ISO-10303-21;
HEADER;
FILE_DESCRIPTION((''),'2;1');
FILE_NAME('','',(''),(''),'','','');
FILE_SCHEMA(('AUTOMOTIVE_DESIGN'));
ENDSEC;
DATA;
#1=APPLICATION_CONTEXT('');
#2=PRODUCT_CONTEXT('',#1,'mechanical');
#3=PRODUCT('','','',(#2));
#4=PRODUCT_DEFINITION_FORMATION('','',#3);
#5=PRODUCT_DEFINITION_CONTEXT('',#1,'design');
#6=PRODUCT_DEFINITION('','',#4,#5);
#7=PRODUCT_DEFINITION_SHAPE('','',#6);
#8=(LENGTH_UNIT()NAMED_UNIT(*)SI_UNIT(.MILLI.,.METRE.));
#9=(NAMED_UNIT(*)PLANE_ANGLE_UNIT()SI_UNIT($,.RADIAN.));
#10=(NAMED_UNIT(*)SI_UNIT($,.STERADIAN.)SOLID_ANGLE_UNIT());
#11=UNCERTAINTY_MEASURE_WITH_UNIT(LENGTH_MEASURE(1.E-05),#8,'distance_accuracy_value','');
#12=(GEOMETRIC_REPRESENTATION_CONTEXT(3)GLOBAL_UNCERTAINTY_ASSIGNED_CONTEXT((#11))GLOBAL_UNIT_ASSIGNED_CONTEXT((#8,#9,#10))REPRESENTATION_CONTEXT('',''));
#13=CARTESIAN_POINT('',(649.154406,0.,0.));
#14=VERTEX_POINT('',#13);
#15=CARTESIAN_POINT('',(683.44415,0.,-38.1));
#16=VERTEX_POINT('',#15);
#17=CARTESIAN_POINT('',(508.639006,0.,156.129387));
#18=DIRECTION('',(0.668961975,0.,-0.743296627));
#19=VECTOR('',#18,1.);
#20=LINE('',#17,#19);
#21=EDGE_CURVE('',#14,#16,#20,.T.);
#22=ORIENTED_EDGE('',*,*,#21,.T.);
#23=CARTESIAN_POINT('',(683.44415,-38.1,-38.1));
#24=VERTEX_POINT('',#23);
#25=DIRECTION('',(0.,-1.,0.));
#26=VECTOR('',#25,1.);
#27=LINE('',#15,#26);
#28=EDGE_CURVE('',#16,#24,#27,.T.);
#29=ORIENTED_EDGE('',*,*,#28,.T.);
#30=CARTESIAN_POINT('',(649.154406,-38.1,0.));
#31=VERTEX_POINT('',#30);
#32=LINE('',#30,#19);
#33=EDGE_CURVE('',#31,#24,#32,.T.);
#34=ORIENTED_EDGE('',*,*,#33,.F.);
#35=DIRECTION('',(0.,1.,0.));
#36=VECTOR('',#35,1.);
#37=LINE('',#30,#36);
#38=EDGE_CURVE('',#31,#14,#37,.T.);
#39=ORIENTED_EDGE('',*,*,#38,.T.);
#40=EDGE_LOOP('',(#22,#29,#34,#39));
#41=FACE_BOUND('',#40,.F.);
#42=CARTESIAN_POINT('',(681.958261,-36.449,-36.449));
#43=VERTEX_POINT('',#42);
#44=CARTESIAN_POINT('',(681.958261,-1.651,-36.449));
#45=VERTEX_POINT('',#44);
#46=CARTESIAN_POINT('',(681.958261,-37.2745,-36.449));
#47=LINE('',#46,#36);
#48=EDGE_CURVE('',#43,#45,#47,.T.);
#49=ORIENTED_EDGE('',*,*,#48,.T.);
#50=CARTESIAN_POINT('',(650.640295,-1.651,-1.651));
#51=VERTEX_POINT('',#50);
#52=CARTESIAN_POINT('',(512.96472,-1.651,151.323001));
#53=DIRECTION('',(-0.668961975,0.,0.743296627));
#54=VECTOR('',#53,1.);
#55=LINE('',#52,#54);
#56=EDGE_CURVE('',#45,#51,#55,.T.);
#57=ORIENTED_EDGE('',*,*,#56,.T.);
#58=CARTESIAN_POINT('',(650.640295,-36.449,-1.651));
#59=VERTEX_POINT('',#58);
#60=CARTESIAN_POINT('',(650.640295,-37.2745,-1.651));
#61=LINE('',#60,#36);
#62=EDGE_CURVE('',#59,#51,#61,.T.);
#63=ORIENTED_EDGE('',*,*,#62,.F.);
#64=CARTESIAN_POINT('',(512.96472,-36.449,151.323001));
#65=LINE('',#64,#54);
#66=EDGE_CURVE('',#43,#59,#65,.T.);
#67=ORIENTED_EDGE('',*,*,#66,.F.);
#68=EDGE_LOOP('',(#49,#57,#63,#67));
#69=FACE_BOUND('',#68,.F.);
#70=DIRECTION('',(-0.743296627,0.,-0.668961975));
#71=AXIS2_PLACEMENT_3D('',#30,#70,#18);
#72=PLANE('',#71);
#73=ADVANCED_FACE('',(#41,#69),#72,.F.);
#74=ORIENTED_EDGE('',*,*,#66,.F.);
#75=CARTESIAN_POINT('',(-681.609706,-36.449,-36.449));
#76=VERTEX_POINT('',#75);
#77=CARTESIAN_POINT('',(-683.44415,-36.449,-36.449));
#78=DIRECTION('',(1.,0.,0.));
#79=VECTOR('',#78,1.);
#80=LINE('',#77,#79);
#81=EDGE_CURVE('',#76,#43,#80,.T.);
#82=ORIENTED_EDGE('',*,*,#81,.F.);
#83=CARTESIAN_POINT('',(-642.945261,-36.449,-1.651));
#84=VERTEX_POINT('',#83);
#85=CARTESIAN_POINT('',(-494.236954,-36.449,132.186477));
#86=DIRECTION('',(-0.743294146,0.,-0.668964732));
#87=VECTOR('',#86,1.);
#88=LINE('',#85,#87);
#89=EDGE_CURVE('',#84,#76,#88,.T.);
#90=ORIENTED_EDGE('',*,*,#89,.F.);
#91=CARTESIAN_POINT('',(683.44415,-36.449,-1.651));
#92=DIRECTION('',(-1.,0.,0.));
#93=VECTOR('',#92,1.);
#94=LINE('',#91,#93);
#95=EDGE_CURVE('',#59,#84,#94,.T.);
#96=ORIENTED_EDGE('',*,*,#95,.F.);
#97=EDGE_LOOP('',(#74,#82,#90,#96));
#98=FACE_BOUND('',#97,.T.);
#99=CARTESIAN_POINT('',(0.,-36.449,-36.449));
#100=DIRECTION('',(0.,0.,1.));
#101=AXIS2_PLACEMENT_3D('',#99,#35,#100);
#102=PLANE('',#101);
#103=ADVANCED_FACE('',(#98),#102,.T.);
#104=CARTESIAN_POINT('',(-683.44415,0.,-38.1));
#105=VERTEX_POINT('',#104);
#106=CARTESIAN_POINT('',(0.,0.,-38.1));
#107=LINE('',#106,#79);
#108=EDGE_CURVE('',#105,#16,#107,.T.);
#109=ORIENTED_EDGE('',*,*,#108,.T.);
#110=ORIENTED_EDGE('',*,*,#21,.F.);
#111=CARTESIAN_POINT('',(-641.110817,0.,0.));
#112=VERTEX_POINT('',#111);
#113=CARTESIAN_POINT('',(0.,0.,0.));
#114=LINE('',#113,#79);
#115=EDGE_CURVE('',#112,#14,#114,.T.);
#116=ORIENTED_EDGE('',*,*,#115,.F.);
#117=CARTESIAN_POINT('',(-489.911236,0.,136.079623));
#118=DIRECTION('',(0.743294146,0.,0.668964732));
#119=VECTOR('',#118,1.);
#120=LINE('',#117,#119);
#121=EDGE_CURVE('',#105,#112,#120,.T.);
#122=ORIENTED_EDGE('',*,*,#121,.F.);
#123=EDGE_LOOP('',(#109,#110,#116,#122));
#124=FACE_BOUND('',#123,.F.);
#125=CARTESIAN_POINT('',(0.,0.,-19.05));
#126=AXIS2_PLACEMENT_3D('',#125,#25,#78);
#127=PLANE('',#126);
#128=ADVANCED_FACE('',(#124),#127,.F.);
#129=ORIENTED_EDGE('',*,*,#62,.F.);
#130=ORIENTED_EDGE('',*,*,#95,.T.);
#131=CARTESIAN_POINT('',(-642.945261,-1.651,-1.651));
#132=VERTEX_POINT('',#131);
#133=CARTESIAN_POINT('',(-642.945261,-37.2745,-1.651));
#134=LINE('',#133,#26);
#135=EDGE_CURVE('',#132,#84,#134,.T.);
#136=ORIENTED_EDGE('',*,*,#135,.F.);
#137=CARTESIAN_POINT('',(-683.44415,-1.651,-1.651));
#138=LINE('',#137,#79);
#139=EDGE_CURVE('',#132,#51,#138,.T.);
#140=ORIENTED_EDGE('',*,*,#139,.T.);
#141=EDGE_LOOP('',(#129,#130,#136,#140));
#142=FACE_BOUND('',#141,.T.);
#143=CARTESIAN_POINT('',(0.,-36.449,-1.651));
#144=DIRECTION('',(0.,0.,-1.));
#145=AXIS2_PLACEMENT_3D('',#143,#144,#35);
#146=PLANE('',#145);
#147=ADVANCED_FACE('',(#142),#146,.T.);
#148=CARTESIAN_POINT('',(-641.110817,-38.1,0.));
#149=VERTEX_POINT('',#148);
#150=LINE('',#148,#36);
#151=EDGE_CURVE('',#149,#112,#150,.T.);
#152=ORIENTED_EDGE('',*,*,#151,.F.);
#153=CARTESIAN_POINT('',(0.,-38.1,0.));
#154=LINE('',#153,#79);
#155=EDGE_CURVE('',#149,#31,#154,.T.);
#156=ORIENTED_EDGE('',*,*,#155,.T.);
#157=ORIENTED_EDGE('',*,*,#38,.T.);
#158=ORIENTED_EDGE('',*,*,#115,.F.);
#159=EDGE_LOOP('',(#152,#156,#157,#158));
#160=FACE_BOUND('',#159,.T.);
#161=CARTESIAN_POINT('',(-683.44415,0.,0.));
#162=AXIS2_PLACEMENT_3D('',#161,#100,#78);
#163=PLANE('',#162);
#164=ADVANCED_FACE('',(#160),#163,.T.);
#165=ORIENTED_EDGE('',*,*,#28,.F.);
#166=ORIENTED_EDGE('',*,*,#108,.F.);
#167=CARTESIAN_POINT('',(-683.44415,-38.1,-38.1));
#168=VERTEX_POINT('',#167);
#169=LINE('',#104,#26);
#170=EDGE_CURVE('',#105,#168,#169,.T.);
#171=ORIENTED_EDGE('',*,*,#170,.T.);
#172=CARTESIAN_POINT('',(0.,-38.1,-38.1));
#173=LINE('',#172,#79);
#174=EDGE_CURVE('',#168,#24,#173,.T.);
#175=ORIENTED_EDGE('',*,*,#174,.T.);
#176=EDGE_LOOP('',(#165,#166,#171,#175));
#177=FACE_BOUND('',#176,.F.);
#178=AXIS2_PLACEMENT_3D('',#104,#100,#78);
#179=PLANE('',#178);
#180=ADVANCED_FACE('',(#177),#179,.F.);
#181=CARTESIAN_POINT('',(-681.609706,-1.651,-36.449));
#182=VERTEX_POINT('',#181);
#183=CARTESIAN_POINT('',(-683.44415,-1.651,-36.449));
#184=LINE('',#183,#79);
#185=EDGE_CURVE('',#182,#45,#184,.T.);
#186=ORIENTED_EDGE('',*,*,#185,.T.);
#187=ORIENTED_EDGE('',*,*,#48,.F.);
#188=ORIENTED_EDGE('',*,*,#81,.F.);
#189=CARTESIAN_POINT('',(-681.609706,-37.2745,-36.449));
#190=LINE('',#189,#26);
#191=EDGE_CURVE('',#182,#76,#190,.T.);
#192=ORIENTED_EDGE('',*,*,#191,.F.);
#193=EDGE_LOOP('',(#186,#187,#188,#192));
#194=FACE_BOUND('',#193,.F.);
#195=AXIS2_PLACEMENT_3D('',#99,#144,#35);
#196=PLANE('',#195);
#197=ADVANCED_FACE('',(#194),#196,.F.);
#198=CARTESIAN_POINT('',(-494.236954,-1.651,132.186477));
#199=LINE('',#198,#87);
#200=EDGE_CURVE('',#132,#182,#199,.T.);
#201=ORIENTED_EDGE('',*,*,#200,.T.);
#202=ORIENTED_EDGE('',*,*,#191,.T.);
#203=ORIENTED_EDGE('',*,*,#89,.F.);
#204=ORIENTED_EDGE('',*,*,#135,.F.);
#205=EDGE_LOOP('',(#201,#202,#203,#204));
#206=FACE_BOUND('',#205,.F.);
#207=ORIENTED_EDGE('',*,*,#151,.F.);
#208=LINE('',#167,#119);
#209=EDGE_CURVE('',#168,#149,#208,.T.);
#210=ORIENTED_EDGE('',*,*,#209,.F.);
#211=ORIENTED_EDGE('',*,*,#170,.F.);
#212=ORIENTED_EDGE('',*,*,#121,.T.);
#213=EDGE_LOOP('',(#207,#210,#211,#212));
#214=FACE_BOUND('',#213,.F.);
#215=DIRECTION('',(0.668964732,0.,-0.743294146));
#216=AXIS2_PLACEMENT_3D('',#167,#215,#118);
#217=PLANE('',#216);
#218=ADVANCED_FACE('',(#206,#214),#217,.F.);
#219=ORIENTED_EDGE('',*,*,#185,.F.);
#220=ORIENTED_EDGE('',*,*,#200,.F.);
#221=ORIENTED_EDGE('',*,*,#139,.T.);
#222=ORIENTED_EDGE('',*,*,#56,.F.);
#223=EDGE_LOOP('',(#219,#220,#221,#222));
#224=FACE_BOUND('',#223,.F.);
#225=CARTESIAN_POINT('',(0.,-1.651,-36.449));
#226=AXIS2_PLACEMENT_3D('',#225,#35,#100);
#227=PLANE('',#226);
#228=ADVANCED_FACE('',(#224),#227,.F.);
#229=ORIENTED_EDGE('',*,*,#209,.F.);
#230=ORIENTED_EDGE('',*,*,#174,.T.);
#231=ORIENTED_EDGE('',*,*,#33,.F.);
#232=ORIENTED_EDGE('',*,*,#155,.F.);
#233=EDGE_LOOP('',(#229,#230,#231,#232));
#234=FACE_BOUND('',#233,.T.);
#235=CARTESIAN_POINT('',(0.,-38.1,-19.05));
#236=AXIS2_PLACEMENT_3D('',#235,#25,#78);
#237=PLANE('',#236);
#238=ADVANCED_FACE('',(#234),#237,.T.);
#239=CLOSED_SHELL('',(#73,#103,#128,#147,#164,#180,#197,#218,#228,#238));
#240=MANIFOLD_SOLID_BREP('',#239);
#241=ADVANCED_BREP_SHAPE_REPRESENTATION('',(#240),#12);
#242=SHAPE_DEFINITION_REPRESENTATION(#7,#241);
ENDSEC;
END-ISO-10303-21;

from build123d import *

# Parameters (mm, degrees)
F0_W          = 1366.8883
F0_H          = 38.1
F1_DEPTH      = 38.1
F2_W          = 34.798
F2_H          = 34.798
F3_DEPTH      = 683.44515
F3_DEPTH_BACK = 683.44515
F5_DEPTH      = 38.101


# Not quite as in the source:
# - a feature names something its author has since deleted; it is built from what else it names


with BuildPart() as f1:
    # F0 (on Front) → F1 (new body)
    with BuildSketch(Plane.XZ):
        with Locations((0, -19.05)):
            Rectangle(F0_W, F0_H)
    extrude(amount=F1_DEPTH)

    # F2 (on Right) → F3 (cut, two sides)
    with BuildSketch(Plane.YZ) as f3_sk:
        with Locations((-19.05, -19.05)):
            Rectangle(F2_W, F2_H)
    extrude(amount=-F3_DEPTH, mode=Mode.SUBTRACT)
    extrude(f3_sk.sketch, amount=F3_DEPTH_BACK, mode=Mode.SUBTRACT)

    # F4 (on face) → F5 (cut, through all)
    with BuildSketch(Plane.XZ.offset(38.1)):
        Polygon((649.1544057584, 0), (683.44415, -38.1), (683.44415, 0), align=None)
        Polygon((-683.44415, 0), (-683.44415, -38.1), (-641.1108166729, 0), align=None)
    extrude(amount=-F5_DEPTH, mode=Mode.SUBTRACT)


solid = f1.part
